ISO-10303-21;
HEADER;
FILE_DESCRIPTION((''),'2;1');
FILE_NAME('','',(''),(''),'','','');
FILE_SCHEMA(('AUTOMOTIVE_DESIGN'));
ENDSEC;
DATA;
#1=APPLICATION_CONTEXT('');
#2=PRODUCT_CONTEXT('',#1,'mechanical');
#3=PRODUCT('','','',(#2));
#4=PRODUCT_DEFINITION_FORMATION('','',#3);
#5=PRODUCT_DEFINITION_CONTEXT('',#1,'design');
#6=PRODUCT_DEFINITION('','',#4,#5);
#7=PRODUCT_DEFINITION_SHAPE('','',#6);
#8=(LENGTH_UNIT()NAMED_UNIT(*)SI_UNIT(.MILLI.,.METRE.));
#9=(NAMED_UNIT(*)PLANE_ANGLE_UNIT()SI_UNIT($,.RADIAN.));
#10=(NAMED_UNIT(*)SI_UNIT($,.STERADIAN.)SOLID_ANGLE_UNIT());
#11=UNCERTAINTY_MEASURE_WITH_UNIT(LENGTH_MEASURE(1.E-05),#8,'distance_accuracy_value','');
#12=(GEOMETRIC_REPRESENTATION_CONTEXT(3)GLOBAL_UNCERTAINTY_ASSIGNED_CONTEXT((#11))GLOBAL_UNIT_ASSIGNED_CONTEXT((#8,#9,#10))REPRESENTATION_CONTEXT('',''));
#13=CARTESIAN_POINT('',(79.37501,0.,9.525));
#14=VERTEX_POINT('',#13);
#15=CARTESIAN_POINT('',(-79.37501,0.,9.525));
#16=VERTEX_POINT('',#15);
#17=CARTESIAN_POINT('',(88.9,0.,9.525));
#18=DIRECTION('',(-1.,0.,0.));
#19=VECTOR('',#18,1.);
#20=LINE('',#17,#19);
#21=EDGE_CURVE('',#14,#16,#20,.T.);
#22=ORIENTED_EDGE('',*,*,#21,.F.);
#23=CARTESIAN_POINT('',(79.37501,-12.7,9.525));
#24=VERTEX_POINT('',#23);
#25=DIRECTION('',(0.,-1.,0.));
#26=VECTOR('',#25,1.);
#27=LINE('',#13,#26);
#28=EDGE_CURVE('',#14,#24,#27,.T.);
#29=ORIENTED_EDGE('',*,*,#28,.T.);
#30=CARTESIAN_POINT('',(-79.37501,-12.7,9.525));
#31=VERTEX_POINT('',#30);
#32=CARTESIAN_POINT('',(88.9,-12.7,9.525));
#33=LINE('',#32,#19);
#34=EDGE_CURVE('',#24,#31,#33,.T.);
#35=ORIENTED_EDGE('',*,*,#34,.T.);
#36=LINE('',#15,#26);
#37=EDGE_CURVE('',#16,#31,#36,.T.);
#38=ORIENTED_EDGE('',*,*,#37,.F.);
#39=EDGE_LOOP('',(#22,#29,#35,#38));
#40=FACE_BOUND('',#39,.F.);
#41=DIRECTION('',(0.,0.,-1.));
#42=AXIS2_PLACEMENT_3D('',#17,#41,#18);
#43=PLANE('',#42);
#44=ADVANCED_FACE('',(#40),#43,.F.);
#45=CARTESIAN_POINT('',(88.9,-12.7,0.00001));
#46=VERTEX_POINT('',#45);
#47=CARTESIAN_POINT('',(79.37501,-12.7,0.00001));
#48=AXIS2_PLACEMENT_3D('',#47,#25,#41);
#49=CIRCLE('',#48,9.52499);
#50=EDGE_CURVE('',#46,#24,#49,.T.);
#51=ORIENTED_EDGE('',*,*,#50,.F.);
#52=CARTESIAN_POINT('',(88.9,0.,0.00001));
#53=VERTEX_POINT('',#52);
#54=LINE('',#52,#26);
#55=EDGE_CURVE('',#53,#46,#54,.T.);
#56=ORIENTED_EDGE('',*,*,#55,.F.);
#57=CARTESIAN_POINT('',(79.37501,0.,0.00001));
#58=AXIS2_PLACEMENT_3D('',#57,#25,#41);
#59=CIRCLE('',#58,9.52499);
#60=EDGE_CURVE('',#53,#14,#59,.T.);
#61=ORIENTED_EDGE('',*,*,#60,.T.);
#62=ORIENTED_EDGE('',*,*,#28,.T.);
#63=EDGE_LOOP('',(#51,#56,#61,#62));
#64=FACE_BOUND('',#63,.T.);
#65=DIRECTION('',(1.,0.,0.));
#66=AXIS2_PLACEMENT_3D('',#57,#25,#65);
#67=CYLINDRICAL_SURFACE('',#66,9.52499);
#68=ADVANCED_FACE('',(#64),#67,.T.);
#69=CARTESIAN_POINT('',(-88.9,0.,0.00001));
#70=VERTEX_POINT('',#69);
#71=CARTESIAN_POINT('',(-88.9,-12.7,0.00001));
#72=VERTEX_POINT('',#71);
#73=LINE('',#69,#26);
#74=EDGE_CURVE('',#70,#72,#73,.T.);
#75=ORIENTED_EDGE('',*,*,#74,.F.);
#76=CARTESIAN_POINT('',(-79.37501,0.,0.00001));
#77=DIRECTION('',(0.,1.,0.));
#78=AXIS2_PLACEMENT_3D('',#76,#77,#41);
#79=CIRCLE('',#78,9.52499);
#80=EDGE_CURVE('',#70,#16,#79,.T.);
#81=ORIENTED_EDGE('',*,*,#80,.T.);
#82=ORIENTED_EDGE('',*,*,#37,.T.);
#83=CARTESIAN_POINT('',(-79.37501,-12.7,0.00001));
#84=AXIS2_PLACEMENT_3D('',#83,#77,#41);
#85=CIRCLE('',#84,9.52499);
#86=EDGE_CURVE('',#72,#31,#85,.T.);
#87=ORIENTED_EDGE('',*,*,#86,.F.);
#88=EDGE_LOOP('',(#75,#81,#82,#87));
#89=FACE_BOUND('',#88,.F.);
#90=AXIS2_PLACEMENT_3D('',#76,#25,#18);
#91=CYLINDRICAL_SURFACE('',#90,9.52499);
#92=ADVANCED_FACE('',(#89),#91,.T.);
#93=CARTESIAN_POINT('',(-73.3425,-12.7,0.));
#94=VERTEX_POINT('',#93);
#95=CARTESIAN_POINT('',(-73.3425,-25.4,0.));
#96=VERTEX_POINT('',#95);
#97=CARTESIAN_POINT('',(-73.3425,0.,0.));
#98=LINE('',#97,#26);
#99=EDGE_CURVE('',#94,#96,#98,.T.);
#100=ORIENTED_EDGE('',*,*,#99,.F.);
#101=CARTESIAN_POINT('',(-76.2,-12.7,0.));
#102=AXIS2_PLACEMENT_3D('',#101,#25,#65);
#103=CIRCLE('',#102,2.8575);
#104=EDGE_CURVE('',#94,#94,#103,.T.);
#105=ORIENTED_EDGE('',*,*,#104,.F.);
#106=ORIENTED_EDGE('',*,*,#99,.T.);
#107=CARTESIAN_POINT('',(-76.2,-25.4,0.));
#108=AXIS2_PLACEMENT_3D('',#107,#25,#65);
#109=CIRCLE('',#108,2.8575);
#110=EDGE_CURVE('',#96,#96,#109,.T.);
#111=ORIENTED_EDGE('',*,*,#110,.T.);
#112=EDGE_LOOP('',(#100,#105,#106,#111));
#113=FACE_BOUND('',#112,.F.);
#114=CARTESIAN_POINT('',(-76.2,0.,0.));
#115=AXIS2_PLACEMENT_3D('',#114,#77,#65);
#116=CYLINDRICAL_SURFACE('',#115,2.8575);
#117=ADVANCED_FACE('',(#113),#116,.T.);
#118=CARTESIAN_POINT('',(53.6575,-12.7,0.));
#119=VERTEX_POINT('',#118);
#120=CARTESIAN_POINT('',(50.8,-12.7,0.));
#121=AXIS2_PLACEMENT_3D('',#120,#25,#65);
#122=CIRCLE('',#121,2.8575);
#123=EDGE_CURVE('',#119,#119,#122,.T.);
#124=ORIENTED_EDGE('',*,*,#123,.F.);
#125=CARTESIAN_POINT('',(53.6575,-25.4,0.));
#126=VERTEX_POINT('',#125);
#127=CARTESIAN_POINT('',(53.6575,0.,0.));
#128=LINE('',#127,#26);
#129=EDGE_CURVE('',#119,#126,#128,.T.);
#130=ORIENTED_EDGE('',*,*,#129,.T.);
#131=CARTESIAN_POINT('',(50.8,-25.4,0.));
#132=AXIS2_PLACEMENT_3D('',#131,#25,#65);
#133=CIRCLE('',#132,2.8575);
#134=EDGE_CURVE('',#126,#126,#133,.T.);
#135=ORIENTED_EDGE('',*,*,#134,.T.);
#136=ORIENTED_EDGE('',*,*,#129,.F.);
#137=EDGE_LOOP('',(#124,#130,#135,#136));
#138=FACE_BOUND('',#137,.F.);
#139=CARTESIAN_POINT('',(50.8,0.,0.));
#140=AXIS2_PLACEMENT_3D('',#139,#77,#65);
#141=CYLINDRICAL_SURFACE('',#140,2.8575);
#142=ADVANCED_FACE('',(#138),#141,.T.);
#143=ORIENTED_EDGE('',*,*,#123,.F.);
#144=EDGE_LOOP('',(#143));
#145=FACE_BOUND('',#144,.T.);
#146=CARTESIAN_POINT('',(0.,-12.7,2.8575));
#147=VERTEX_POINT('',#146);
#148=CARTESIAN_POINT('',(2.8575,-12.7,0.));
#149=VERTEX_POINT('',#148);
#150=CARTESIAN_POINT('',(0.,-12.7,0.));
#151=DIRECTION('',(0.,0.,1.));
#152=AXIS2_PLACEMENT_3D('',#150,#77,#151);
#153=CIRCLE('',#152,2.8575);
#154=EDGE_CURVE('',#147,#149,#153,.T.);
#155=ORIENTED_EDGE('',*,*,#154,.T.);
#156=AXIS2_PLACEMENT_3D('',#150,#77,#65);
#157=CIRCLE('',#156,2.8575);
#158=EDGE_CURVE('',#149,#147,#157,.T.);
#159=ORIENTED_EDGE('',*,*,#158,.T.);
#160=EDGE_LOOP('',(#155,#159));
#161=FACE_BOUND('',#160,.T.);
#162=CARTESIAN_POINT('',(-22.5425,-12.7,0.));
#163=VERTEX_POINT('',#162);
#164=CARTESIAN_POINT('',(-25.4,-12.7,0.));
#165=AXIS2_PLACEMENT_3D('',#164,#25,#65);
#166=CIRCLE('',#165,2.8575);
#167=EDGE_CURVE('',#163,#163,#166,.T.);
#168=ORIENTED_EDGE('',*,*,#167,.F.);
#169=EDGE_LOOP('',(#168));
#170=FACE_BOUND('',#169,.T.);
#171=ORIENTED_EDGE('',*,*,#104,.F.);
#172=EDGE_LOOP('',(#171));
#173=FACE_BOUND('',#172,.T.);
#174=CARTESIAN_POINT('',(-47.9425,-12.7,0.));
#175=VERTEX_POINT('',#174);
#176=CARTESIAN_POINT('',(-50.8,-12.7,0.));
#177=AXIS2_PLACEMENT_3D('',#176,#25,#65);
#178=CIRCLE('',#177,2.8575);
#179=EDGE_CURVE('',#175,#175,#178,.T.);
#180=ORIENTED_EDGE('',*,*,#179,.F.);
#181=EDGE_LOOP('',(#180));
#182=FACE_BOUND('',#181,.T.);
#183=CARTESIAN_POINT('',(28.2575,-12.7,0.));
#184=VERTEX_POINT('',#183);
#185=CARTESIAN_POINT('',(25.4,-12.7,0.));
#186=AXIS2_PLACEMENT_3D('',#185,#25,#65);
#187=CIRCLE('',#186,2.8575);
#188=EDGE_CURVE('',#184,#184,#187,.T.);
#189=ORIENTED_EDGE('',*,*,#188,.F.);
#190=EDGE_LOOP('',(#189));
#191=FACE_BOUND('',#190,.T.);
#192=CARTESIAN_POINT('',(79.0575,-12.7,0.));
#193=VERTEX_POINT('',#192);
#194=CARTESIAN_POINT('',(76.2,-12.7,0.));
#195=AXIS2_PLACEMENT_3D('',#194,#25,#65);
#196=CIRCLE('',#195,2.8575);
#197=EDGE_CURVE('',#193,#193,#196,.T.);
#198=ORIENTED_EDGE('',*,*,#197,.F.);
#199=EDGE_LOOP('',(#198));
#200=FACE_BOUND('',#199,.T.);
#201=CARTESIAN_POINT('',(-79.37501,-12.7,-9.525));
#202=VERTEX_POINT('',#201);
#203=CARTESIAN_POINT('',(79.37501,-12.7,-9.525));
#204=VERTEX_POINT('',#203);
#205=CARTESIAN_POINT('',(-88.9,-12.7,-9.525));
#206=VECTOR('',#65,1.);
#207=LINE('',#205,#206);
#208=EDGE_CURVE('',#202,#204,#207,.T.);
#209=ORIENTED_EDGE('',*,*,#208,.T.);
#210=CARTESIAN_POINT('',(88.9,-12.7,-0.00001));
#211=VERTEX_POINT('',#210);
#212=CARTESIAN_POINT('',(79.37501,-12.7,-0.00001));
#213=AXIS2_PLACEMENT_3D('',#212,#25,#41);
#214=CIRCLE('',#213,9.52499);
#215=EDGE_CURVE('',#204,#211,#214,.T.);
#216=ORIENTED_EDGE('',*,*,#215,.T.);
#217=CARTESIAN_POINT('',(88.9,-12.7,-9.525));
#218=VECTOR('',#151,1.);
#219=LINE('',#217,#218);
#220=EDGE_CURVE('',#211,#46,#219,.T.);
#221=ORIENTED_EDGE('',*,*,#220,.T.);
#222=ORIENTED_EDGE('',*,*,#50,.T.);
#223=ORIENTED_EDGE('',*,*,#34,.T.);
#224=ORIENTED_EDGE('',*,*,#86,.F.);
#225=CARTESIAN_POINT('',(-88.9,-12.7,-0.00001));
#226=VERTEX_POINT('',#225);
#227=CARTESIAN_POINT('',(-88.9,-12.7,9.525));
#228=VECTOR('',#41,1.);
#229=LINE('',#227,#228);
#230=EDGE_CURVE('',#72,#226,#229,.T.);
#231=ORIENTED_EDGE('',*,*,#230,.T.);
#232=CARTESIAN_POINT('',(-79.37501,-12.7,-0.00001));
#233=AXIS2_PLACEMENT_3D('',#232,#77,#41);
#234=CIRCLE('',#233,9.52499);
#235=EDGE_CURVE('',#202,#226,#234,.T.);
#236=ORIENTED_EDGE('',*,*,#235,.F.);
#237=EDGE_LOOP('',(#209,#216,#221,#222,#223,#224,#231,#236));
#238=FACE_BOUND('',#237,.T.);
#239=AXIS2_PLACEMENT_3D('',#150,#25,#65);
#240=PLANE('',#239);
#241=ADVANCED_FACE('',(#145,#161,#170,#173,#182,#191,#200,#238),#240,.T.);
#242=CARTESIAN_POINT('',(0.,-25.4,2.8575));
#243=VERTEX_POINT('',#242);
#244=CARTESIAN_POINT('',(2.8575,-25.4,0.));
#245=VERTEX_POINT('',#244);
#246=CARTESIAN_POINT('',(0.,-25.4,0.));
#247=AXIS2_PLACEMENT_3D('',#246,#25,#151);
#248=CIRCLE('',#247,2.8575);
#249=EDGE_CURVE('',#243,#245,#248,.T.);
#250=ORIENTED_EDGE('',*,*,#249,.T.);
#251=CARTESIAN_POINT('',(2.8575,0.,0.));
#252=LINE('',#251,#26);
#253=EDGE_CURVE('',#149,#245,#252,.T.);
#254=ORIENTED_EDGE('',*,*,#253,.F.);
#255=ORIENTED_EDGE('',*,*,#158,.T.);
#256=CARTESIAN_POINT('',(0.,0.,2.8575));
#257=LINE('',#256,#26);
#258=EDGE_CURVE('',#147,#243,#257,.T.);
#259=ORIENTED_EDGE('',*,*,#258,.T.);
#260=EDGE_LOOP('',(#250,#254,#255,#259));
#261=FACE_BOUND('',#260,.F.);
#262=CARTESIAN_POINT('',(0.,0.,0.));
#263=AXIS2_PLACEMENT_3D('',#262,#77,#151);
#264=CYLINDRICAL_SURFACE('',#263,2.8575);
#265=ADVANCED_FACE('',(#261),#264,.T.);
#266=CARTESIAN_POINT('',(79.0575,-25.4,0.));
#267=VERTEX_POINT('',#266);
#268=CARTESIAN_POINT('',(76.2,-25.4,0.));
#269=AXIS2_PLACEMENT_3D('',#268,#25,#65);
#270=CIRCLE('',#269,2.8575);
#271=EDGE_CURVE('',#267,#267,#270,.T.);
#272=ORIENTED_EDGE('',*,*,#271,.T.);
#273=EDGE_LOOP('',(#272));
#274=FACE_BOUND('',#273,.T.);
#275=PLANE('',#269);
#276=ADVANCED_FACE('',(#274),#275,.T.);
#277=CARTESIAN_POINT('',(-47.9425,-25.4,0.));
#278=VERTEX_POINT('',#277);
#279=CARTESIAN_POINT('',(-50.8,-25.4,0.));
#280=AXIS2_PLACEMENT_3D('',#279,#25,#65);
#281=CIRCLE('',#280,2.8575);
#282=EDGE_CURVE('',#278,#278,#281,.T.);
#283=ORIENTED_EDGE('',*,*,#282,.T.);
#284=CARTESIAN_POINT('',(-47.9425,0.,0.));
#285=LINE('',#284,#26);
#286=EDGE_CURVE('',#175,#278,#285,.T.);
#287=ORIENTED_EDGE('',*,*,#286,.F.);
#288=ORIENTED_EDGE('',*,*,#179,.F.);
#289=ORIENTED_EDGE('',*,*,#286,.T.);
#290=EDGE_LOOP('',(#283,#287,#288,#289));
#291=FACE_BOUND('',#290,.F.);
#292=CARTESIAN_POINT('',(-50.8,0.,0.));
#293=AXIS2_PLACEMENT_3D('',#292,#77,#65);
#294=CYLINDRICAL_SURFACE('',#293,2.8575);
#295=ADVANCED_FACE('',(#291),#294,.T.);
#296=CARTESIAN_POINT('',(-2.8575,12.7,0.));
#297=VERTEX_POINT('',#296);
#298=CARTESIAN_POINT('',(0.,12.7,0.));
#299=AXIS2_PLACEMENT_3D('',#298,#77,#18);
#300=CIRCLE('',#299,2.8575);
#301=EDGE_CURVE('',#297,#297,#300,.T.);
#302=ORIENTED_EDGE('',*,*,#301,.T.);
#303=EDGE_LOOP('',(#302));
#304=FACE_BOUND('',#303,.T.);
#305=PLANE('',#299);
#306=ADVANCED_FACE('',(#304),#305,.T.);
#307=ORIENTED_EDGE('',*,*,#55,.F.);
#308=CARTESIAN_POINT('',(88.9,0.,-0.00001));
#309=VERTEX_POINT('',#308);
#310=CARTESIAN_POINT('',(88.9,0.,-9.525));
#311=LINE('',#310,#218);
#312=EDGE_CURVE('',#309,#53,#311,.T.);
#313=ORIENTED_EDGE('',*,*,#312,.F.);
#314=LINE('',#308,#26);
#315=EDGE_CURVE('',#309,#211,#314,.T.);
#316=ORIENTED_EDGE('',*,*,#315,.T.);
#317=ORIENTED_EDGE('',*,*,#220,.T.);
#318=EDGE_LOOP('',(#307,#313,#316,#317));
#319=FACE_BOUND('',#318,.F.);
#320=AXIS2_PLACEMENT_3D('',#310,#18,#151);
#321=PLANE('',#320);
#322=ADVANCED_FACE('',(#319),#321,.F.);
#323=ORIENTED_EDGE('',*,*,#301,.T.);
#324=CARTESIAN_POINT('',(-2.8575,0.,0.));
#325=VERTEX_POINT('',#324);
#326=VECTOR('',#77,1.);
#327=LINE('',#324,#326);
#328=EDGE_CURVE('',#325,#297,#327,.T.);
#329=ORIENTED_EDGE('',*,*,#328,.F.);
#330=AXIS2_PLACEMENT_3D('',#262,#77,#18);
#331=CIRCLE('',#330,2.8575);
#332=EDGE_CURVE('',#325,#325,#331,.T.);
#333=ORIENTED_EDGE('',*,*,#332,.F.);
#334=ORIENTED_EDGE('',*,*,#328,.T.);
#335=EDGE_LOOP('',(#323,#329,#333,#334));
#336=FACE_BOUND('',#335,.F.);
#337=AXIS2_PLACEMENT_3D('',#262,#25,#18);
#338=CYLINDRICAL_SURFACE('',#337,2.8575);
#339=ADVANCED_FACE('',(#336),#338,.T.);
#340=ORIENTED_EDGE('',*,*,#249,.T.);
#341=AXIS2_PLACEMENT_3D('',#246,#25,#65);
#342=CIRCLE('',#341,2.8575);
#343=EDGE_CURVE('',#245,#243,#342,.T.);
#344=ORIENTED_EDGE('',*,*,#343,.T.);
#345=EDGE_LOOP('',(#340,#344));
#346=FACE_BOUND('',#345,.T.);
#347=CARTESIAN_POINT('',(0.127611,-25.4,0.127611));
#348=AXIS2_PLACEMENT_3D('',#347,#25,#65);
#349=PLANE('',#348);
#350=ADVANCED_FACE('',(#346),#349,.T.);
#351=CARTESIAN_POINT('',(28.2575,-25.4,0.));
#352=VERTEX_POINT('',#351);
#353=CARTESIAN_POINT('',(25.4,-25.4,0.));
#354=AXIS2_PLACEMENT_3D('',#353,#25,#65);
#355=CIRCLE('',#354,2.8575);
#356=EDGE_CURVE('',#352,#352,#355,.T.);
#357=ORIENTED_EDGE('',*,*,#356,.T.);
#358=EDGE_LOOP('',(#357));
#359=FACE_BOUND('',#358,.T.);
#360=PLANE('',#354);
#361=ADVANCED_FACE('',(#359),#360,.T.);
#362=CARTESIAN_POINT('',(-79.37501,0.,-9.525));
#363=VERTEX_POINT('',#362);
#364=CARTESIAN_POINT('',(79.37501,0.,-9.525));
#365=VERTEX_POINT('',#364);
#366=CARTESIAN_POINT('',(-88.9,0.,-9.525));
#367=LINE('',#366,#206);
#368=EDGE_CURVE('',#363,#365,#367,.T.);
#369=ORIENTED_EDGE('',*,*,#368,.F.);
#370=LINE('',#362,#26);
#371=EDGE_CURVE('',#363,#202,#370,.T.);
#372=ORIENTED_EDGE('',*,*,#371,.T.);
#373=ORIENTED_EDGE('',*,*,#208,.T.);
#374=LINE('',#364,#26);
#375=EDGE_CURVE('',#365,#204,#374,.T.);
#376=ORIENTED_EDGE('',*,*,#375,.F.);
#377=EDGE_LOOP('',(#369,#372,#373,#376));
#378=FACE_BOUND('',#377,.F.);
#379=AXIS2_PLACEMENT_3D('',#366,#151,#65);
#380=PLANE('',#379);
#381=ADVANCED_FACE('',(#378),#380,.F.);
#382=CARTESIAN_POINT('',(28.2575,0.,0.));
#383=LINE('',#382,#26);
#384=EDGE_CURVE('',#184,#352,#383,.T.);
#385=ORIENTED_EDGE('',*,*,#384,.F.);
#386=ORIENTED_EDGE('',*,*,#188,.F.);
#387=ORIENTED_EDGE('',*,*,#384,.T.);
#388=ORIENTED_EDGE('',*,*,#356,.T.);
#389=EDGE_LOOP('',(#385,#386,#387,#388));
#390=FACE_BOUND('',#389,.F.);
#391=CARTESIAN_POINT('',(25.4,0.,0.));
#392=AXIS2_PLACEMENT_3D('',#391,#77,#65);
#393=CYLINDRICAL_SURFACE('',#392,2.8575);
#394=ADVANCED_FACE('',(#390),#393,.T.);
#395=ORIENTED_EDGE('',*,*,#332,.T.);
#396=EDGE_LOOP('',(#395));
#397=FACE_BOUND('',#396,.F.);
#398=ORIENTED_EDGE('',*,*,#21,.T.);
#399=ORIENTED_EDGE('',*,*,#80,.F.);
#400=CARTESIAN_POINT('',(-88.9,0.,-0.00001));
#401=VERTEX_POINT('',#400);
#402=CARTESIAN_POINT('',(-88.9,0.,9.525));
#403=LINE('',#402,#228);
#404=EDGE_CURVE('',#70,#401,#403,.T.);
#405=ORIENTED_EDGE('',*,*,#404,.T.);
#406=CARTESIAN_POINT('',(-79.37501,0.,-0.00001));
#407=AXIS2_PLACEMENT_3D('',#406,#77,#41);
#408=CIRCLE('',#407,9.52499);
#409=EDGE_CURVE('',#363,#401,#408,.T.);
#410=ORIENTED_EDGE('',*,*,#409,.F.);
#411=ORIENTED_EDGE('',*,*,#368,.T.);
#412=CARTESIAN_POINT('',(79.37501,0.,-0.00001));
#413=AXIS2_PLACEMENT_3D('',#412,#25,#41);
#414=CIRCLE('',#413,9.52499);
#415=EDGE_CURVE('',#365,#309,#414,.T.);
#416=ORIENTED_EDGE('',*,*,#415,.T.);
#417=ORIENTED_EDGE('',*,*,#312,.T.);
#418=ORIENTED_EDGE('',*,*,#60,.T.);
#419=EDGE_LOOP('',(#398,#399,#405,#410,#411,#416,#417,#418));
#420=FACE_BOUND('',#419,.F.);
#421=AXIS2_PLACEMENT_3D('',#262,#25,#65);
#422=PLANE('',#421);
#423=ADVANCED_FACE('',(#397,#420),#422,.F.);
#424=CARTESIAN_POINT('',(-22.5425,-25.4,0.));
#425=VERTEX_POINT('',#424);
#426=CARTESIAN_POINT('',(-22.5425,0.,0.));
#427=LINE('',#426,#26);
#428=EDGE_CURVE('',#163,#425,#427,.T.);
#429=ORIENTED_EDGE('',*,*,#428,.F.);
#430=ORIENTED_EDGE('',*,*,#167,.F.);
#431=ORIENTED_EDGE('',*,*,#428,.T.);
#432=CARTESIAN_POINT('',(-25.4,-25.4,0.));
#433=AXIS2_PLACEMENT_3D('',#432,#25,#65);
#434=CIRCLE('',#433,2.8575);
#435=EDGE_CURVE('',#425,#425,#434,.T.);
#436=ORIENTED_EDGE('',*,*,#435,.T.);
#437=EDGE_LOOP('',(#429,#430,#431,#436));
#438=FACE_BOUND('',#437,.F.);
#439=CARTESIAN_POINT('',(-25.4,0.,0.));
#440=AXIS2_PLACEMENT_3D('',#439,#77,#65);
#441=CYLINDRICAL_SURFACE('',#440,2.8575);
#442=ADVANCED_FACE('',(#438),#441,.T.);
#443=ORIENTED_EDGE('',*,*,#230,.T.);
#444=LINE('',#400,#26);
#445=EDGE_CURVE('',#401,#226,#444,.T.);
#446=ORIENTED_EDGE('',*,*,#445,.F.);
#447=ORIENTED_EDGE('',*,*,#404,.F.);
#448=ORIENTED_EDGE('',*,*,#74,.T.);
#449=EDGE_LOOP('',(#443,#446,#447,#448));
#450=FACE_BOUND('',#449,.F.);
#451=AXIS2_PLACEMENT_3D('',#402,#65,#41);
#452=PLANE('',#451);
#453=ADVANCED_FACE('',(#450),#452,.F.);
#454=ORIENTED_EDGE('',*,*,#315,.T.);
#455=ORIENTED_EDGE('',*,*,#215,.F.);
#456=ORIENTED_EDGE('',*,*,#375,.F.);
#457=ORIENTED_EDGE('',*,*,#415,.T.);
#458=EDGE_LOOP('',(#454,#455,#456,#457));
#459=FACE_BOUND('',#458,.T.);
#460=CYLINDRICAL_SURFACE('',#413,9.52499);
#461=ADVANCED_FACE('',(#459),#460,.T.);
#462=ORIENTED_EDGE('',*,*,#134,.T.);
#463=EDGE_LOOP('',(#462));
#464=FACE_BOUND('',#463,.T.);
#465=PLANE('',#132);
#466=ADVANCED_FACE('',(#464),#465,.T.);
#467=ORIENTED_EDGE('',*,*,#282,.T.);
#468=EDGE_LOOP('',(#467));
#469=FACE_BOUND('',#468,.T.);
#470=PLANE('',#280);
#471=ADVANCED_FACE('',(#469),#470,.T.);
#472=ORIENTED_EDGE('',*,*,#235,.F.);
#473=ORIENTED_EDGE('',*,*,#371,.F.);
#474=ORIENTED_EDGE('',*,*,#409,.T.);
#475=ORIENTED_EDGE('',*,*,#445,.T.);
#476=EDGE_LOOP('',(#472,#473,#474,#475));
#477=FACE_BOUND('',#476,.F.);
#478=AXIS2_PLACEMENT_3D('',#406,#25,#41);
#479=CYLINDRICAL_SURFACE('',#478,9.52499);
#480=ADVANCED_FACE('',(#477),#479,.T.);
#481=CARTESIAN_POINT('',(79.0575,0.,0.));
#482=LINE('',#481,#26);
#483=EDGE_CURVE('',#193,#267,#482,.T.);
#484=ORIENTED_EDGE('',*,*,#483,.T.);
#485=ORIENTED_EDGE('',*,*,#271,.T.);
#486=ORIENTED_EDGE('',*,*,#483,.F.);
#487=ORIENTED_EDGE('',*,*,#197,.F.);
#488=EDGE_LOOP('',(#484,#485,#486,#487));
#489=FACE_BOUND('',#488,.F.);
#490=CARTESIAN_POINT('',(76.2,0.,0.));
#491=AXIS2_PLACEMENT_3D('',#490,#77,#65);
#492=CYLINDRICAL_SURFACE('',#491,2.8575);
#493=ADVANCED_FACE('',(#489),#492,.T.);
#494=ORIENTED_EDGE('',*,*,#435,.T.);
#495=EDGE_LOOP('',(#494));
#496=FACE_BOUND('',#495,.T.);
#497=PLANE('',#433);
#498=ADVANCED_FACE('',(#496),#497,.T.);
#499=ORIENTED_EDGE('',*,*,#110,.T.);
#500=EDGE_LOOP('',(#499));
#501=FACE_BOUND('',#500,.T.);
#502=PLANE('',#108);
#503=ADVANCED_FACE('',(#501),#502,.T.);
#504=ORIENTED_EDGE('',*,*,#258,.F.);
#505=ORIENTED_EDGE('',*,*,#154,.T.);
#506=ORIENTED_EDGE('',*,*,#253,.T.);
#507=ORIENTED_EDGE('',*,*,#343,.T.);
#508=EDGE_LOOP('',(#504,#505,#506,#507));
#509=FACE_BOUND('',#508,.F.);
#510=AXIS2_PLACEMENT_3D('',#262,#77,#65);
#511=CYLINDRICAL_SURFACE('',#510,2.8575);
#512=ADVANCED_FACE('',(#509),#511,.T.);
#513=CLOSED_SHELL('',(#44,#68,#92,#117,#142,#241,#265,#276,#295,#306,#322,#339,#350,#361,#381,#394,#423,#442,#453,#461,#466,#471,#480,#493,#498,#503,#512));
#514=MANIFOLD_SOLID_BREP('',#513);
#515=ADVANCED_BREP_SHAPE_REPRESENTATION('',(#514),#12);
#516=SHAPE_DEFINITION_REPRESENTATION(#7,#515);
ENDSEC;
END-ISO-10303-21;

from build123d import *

# Parameters (mm, degrees)
F0_R     = 2.8575
F1_DEPTH = 12.7
F2_DEPTH = 25.4
F3_R     = 2.8575
F4_DEPTH = 12.7
F5_R     = 9.52499


# Not quite as in the source:
# - a fillet or chamfer is up to 0.001 mm smaller than in the source, because OpenCascade refuses the exact size
# - a feature names something its author has since deleted; it is built from what else it names


with BuildPart() as f1:
    # F0 (on Front) → F1 (new body)
    with BuildSketch(Plane.XZ):
        Polygon((-88.9, -9.525), (88.9, -9.525), (88.9, 9.525), (0, 9.525), (-88.9, 9.525), align=None)
        with Locations((-76.2, 0)):
            Circle(F0_R, mode=Mode.SUBTRACT)
        with Locations((-50.8, 0)):
            Circle(F0_R, mode=Mode.SUBTRACT)
        with Locations((-25.4, 0)):
            Circle(F0_R, mode=Mode.SUBTRACT)
        with BuildLine():
            ThreePointArc((2.8575, 0), (-2.0205576272, -2.0205576272), (0, 2.8575))
            ThreePointArc((0, 2.8575), (2.0205576272, 2.0205576272), (2.8575, 0))
        make_face(mode=Mode.SUBTRACT)
        with Locations((25.4, 0)):
            Circle(F0_R, mode=Mode.SUBTRACT)
        with Locations((50.8, 0)):
            Circle(F0_R, mode=Mode.SUBTRACT)
        with Locations((76.2, 0)):
            Circle(F0_R, mode=Mode.SUBTRACT)
    extrude(amount=F1_DEPTH)

    # F0 (on Front) → F2 (join)
    with BuildSketch(Plane.XZ):
        with BuildLine():
            ThreePointArc((2.8575, 0), (2.0205576272, 2.0205576272), (0, 2.8575))
            ThreePointArc((0, 2.8575), (-2.0205576272, -2.0205576272), (2.8575, 0))
        make_face()
        with Locations((-76.2, 0)):
            Circle(F0_R)
        with Locations((-50.8, 0)):
            Circle(F0_R)
        with Locations((-25.4, 0)):
            Circle(F0_R)
        with Locations((25.4, 0)):
            Circle(F0_R)
        with Locations((50.8, 0)):
            Circle(F0_R)
        with Locations((76.2, 0)):
            Circle(F0_R)
    extrude(amount=F2_DEPTH)

    # F3 (on face) → F4 (join)
    with BuildSketch(Plane(origin=(0, 0, 0), x_dir=(-1, 0, 0), z_dir=(0, 1, 0))):
        Circle(F3_R)
    extrude(amount=F4_DEPTH)

    # F5 (radius 9.525 in the source; OpenCascade refuses exactly that, so slightly less here)
    f5_edges = [f1.edges().sort_by_distance(p)[0] for p in [
        (88.9, -6.35, 9.525),
        (88.9, -6.35, -9.525),
        (-88.9, -6.35, -9.525),
        (-88.9, -6.35, 9.525),
    ]]
    fillet(f5_edges, radius=F5_R)


solid = f1.part
